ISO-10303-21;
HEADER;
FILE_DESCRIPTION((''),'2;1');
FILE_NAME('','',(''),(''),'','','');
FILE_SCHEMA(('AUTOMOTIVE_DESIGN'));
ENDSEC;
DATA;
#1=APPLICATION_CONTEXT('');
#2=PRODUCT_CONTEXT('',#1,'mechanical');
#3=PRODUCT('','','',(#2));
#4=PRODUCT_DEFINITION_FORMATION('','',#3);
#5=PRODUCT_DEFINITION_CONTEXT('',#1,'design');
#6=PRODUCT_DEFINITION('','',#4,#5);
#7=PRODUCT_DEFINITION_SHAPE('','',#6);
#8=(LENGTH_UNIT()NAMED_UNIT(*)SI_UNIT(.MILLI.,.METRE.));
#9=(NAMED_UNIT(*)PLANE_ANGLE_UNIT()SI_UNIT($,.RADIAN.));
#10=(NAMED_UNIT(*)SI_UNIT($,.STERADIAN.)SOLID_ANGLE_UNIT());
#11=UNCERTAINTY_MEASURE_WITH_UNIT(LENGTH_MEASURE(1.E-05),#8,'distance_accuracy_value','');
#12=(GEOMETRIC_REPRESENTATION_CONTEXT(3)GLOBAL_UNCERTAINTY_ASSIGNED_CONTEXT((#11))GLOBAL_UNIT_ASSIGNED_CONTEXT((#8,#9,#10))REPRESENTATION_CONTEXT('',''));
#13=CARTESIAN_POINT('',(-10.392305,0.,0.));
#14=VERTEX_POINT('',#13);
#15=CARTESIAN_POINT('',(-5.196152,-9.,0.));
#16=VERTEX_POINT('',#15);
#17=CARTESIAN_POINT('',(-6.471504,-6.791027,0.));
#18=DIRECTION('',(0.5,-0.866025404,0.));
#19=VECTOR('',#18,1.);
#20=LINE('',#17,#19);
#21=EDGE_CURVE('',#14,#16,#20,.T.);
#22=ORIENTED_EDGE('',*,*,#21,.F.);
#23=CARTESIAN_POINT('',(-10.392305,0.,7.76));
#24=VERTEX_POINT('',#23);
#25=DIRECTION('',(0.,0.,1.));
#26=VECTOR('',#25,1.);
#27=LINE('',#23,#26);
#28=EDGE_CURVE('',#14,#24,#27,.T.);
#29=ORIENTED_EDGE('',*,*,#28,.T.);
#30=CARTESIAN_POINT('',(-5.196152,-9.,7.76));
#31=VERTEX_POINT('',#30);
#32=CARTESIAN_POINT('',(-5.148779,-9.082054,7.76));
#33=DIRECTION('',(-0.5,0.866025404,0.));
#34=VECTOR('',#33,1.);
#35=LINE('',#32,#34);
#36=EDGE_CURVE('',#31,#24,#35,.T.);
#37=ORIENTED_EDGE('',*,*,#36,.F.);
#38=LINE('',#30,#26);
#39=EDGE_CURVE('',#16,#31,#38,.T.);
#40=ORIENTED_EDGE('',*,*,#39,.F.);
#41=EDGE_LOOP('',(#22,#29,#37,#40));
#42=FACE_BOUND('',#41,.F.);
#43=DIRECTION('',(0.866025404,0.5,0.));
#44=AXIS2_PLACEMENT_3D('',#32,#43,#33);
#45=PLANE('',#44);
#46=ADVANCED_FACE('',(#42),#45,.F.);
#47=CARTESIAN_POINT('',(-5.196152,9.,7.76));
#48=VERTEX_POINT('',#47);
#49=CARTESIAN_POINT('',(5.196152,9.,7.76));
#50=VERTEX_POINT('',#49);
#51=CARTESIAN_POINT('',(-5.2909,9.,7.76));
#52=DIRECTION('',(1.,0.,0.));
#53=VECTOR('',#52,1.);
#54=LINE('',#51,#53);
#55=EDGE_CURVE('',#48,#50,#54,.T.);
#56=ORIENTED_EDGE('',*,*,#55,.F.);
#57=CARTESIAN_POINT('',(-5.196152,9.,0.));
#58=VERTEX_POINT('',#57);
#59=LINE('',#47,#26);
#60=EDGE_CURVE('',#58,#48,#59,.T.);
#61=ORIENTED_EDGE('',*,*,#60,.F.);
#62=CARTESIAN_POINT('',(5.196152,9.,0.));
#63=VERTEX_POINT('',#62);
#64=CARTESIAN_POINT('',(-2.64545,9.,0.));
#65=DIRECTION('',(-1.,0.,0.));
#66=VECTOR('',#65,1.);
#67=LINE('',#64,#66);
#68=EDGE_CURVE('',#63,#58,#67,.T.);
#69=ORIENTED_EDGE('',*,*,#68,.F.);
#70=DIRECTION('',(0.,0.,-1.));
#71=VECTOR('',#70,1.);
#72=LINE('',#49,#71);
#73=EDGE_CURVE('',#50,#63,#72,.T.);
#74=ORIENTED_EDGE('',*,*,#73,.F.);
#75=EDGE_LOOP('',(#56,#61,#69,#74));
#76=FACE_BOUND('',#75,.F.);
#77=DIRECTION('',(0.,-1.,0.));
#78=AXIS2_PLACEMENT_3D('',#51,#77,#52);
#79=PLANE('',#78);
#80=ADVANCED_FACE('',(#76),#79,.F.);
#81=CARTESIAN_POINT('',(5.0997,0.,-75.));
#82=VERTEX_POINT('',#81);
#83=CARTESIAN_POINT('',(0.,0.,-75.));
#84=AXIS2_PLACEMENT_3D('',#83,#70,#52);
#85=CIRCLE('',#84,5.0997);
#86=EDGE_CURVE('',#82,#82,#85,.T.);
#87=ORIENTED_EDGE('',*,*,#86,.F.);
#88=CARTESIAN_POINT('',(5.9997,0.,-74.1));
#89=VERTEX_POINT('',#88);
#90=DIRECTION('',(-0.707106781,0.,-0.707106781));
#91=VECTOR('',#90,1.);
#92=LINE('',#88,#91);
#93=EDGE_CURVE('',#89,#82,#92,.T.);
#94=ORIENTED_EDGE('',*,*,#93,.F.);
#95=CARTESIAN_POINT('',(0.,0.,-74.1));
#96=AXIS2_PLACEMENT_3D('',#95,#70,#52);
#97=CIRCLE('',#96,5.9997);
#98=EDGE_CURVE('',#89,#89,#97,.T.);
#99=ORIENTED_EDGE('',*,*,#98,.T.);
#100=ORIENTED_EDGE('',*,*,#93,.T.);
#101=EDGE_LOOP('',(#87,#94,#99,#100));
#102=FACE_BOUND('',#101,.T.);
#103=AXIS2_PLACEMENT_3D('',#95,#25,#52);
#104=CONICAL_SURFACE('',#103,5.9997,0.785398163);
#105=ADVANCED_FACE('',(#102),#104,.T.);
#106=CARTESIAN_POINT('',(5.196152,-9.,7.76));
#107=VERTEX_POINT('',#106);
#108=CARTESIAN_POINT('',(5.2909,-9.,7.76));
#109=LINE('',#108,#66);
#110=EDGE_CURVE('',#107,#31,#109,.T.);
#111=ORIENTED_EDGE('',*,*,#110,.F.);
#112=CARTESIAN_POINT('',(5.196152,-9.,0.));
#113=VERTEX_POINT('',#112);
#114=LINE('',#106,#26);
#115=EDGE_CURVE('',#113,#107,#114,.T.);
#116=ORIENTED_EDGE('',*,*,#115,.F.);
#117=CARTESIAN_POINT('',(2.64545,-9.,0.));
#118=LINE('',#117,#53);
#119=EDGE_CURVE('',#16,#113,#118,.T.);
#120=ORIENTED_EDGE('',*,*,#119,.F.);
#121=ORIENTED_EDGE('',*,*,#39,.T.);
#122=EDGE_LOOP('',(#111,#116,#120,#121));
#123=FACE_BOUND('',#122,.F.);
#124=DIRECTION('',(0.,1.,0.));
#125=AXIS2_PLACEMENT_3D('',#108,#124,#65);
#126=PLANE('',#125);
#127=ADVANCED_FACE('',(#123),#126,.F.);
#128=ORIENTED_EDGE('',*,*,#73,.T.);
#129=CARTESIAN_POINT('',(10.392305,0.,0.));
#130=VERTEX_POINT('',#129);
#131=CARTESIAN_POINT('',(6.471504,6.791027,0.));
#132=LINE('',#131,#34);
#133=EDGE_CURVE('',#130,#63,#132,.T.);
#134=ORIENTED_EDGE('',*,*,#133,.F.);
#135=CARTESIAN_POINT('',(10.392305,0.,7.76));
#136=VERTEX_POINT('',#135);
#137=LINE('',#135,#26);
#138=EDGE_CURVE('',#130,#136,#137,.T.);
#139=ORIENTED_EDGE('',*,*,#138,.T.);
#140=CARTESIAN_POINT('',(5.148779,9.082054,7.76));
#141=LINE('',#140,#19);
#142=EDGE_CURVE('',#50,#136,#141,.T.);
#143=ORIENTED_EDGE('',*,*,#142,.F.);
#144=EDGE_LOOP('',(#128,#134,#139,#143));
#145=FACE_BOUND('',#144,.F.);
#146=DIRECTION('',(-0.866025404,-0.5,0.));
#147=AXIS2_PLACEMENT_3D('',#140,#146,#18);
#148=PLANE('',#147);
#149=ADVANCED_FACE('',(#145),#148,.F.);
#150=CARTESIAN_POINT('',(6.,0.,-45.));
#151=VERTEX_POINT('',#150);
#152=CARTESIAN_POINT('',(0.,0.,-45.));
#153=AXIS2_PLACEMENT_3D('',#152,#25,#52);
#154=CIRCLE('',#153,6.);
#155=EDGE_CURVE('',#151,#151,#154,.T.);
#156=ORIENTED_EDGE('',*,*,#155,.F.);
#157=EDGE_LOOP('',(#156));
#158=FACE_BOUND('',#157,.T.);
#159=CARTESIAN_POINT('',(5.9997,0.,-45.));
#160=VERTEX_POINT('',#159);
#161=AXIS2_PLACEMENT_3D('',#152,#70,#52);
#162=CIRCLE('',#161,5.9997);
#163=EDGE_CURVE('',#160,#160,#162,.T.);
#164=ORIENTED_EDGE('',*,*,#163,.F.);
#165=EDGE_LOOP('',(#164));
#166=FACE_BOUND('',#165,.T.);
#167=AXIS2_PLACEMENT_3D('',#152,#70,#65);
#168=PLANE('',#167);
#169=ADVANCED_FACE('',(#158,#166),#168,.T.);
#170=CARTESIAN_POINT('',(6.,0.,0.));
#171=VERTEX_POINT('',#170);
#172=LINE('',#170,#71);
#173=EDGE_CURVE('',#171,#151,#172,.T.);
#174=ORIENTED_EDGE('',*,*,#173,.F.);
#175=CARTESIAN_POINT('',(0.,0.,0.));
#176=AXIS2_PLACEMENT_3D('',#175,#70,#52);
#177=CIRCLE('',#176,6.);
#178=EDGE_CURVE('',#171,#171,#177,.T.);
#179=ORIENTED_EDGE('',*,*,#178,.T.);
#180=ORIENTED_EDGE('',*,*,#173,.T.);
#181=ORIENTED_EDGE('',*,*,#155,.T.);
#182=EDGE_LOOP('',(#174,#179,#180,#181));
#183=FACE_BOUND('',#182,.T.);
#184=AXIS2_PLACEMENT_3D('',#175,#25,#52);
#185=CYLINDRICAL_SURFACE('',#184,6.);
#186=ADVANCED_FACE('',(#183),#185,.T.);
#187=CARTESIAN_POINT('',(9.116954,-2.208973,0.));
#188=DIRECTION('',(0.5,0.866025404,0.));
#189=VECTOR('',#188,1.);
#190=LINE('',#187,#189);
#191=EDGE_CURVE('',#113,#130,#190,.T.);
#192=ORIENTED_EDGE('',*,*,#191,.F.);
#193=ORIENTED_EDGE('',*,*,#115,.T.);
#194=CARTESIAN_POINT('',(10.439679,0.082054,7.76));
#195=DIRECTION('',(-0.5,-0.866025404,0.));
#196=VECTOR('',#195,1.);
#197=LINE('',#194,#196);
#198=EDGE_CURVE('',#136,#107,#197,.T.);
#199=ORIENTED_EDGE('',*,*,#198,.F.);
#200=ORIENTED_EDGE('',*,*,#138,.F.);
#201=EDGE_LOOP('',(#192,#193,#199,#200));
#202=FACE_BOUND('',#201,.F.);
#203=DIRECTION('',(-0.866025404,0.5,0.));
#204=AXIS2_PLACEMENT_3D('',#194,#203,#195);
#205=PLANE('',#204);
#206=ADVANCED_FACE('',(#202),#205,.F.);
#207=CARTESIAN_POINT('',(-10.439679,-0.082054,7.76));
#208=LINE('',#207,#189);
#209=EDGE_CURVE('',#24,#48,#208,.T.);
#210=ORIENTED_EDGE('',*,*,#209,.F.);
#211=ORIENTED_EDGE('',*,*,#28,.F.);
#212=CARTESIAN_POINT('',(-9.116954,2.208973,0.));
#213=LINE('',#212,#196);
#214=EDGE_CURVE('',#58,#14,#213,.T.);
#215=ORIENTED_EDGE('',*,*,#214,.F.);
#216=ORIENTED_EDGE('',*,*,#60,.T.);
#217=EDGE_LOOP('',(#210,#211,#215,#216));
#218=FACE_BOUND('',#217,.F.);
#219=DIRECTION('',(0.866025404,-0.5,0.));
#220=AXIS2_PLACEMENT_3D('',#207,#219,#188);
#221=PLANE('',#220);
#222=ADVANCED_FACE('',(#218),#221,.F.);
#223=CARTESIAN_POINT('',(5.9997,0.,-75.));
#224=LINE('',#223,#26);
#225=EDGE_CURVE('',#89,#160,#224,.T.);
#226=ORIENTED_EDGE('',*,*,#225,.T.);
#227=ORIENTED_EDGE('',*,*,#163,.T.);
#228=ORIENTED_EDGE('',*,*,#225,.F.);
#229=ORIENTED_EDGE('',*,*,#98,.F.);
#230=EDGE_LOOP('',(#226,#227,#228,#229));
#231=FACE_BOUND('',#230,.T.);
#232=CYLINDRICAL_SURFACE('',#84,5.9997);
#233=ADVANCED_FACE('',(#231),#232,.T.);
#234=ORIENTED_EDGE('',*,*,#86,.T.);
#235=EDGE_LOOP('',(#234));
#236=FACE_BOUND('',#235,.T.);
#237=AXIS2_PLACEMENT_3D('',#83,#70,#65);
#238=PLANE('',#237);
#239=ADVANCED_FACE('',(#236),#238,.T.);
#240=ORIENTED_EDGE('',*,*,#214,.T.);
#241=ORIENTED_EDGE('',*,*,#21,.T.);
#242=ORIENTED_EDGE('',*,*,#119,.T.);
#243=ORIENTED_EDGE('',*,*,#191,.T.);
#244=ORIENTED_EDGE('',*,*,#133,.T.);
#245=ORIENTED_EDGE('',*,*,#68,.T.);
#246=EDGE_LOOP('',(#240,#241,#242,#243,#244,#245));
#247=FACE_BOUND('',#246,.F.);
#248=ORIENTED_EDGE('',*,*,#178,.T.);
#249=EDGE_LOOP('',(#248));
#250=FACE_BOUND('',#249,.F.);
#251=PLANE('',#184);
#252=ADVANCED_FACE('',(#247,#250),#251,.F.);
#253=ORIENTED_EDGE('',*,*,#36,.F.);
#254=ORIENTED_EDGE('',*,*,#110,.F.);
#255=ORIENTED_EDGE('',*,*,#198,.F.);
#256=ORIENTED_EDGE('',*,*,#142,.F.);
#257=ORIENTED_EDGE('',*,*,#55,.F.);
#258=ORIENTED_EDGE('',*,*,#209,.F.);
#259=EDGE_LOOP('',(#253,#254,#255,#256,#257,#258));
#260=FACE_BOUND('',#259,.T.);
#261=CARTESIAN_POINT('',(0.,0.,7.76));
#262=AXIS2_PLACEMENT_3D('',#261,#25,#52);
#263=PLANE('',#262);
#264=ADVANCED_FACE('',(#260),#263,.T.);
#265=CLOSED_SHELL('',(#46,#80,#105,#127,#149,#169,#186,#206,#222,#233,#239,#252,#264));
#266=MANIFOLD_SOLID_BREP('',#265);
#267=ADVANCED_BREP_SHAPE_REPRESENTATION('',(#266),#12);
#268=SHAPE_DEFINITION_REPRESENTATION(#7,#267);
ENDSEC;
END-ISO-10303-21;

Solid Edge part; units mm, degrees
sketch "Sketch1" plane through (0, 0, 0) normal (0, 0, 1) x (1, 0, 0)
  circle A0 centre (0, 0) radius 10.44
  dimension "D1" = 20.88
extrude "Protrusion1" add sketch "Sketch1" along normal blind 7.76
sketch "Sketch2" plane through (0, 0, 0) normal (0, 0, -1) x (1, 0, 0)
  circle A0 centre (0, 0) radius 6
extrude "Protrusion2" add sketch "Sketch2" along normal blind 75
sketch "Sketch3" plane through (0, 0, -75) normal (0, 0, -1) x (1, 0, 0)
  circle A0 centre (0, 0) radius 5.9997
extrude "Cutout1" cut sketch "Sketch3" against normal blind 30 flip side to cut
chamfer "Chamfer_1" distance 0.9 angle 45 1 edges at (-5.9997, 0, -75)
sketch "Sketch4" plane through (0, 0, 7.76) normal (0, 0, 1) x (1, 0, 0)
  line L0 (-5.2909, 9) -> (5.2909, 9)
  dimension "D1" = 18
extrude "Cutout2" cut sketch "Sketch4" against normal up to next material side at (0, 9.05, 7.76)
pattern_circular "Pattern1" count 6 over 360 about axis through (0, 0, 7.76) along (0, 0, 1) of "Cutout2"
properties part number "24104513"
